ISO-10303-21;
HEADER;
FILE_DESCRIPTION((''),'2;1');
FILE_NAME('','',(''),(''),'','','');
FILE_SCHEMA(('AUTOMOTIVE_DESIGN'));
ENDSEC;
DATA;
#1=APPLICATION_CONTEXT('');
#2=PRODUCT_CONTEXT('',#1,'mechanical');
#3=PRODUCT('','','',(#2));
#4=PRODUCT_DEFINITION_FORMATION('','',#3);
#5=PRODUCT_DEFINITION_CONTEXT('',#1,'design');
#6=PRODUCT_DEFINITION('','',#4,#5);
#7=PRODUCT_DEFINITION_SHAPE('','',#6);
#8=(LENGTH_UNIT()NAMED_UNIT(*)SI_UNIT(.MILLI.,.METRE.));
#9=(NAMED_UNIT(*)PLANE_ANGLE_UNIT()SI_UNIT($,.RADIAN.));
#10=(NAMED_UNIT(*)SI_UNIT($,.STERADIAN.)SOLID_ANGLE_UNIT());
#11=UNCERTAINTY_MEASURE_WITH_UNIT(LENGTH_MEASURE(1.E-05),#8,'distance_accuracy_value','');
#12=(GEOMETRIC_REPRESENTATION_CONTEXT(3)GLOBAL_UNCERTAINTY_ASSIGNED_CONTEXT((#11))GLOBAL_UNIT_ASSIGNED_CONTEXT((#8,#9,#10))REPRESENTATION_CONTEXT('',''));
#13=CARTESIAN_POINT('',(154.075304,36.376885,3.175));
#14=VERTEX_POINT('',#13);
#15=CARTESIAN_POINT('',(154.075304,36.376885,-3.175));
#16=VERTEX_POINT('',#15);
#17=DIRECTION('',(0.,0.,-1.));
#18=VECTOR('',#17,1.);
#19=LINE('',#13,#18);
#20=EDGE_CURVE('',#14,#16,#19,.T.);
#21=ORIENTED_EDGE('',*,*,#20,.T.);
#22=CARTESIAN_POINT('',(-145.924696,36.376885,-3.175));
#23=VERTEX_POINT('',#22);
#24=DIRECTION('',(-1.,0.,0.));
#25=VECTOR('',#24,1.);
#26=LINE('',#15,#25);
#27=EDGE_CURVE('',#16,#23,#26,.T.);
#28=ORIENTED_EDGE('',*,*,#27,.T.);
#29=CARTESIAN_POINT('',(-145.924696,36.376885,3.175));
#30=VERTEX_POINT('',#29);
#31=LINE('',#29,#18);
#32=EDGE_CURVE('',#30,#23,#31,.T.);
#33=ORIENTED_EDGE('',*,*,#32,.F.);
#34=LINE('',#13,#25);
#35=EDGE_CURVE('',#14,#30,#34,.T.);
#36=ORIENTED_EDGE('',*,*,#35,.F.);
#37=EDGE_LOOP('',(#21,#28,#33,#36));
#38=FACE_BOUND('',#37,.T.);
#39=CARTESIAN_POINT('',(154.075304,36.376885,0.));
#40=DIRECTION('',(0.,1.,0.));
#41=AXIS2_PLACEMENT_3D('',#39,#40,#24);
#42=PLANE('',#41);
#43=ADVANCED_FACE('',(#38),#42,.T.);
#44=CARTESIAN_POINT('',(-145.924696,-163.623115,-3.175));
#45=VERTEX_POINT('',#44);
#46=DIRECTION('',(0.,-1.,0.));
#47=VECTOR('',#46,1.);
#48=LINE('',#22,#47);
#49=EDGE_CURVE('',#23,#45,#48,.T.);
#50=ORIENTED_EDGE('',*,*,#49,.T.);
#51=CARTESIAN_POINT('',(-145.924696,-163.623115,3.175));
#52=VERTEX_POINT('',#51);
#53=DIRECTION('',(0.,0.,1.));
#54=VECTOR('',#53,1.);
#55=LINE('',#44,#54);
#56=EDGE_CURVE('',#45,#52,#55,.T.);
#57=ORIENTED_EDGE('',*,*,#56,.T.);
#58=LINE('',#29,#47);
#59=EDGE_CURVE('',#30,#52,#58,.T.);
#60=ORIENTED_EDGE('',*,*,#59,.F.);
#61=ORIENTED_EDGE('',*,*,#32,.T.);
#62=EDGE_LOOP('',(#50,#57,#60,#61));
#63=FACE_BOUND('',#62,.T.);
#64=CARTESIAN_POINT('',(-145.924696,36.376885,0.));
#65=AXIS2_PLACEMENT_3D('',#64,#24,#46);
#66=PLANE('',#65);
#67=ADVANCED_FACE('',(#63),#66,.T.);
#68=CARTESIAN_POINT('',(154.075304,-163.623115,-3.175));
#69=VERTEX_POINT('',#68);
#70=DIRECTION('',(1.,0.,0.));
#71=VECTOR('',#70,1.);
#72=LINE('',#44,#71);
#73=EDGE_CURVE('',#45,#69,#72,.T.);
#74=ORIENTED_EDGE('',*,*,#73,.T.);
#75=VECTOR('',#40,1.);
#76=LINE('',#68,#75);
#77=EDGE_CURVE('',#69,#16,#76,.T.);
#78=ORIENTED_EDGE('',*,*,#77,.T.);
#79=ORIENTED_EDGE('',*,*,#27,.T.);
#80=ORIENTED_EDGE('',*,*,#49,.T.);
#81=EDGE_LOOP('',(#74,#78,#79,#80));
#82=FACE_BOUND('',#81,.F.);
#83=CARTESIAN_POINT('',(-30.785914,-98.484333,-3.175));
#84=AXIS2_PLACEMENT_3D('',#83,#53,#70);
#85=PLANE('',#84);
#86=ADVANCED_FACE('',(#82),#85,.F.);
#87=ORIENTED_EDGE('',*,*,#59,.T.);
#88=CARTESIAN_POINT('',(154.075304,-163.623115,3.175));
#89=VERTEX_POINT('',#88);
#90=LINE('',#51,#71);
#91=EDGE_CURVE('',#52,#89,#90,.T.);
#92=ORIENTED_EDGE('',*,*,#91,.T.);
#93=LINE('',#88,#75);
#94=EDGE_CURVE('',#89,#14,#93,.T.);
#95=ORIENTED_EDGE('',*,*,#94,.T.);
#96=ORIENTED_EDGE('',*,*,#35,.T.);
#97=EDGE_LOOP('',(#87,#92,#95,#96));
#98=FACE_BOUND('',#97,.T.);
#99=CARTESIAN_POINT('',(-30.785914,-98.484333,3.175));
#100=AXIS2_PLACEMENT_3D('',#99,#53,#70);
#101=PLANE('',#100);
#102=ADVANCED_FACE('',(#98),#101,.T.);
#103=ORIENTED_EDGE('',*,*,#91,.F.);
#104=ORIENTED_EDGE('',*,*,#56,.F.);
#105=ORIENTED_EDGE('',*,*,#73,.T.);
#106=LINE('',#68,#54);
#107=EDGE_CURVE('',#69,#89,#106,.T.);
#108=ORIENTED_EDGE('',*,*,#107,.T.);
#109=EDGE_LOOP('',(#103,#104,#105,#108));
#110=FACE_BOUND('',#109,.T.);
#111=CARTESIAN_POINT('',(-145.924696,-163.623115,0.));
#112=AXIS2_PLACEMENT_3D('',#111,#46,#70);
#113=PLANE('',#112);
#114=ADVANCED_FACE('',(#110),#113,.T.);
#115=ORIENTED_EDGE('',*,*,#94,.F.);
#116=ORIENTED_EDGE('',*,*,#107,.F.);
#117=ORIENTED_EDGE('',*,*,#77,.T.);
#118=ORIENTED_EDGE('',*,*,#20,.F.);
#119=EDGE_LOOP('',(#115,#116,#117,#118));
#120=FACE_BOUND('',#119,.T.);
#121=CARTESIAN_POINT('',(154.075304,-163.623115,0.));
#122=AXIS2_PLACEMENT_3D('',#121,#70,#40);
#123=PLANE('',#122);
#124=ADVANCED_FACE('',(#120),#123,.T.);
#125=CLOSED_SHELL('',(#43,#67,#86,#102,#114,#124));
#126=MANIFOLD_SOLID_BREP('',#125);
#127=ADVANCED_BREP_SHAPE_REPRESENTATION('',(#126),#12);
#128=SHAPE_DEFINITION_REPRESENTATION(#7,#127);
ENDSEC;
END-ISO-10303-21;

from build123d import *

# Parameters (mm, degrees)
F1_DEPTH = 3.175


# Not quite as in the source:
# - a length typed as a fraction of an inch, garbled in the dataset ("3 / 203.2 mm" for 3/8 in), is restored


with BuildPart() as f1:
    # F0 (on Top) → F1 (new body, symmetric)
    with BuildSketch(Plane.XY):
        Polygon((154.0753036737, -163.6231148611), (-145.9246963263, 36.3768851389), (-145.9246963263, -163.6231148611), align=None)
        Polygon((154.0753036737, 36.3768851389), (-145.9246963263, 36.3768851389), (154.0753036737, -163.6231148611), align=None)
    extrude(amount=F1_DEPTH, both=True)


solid = f1.part
